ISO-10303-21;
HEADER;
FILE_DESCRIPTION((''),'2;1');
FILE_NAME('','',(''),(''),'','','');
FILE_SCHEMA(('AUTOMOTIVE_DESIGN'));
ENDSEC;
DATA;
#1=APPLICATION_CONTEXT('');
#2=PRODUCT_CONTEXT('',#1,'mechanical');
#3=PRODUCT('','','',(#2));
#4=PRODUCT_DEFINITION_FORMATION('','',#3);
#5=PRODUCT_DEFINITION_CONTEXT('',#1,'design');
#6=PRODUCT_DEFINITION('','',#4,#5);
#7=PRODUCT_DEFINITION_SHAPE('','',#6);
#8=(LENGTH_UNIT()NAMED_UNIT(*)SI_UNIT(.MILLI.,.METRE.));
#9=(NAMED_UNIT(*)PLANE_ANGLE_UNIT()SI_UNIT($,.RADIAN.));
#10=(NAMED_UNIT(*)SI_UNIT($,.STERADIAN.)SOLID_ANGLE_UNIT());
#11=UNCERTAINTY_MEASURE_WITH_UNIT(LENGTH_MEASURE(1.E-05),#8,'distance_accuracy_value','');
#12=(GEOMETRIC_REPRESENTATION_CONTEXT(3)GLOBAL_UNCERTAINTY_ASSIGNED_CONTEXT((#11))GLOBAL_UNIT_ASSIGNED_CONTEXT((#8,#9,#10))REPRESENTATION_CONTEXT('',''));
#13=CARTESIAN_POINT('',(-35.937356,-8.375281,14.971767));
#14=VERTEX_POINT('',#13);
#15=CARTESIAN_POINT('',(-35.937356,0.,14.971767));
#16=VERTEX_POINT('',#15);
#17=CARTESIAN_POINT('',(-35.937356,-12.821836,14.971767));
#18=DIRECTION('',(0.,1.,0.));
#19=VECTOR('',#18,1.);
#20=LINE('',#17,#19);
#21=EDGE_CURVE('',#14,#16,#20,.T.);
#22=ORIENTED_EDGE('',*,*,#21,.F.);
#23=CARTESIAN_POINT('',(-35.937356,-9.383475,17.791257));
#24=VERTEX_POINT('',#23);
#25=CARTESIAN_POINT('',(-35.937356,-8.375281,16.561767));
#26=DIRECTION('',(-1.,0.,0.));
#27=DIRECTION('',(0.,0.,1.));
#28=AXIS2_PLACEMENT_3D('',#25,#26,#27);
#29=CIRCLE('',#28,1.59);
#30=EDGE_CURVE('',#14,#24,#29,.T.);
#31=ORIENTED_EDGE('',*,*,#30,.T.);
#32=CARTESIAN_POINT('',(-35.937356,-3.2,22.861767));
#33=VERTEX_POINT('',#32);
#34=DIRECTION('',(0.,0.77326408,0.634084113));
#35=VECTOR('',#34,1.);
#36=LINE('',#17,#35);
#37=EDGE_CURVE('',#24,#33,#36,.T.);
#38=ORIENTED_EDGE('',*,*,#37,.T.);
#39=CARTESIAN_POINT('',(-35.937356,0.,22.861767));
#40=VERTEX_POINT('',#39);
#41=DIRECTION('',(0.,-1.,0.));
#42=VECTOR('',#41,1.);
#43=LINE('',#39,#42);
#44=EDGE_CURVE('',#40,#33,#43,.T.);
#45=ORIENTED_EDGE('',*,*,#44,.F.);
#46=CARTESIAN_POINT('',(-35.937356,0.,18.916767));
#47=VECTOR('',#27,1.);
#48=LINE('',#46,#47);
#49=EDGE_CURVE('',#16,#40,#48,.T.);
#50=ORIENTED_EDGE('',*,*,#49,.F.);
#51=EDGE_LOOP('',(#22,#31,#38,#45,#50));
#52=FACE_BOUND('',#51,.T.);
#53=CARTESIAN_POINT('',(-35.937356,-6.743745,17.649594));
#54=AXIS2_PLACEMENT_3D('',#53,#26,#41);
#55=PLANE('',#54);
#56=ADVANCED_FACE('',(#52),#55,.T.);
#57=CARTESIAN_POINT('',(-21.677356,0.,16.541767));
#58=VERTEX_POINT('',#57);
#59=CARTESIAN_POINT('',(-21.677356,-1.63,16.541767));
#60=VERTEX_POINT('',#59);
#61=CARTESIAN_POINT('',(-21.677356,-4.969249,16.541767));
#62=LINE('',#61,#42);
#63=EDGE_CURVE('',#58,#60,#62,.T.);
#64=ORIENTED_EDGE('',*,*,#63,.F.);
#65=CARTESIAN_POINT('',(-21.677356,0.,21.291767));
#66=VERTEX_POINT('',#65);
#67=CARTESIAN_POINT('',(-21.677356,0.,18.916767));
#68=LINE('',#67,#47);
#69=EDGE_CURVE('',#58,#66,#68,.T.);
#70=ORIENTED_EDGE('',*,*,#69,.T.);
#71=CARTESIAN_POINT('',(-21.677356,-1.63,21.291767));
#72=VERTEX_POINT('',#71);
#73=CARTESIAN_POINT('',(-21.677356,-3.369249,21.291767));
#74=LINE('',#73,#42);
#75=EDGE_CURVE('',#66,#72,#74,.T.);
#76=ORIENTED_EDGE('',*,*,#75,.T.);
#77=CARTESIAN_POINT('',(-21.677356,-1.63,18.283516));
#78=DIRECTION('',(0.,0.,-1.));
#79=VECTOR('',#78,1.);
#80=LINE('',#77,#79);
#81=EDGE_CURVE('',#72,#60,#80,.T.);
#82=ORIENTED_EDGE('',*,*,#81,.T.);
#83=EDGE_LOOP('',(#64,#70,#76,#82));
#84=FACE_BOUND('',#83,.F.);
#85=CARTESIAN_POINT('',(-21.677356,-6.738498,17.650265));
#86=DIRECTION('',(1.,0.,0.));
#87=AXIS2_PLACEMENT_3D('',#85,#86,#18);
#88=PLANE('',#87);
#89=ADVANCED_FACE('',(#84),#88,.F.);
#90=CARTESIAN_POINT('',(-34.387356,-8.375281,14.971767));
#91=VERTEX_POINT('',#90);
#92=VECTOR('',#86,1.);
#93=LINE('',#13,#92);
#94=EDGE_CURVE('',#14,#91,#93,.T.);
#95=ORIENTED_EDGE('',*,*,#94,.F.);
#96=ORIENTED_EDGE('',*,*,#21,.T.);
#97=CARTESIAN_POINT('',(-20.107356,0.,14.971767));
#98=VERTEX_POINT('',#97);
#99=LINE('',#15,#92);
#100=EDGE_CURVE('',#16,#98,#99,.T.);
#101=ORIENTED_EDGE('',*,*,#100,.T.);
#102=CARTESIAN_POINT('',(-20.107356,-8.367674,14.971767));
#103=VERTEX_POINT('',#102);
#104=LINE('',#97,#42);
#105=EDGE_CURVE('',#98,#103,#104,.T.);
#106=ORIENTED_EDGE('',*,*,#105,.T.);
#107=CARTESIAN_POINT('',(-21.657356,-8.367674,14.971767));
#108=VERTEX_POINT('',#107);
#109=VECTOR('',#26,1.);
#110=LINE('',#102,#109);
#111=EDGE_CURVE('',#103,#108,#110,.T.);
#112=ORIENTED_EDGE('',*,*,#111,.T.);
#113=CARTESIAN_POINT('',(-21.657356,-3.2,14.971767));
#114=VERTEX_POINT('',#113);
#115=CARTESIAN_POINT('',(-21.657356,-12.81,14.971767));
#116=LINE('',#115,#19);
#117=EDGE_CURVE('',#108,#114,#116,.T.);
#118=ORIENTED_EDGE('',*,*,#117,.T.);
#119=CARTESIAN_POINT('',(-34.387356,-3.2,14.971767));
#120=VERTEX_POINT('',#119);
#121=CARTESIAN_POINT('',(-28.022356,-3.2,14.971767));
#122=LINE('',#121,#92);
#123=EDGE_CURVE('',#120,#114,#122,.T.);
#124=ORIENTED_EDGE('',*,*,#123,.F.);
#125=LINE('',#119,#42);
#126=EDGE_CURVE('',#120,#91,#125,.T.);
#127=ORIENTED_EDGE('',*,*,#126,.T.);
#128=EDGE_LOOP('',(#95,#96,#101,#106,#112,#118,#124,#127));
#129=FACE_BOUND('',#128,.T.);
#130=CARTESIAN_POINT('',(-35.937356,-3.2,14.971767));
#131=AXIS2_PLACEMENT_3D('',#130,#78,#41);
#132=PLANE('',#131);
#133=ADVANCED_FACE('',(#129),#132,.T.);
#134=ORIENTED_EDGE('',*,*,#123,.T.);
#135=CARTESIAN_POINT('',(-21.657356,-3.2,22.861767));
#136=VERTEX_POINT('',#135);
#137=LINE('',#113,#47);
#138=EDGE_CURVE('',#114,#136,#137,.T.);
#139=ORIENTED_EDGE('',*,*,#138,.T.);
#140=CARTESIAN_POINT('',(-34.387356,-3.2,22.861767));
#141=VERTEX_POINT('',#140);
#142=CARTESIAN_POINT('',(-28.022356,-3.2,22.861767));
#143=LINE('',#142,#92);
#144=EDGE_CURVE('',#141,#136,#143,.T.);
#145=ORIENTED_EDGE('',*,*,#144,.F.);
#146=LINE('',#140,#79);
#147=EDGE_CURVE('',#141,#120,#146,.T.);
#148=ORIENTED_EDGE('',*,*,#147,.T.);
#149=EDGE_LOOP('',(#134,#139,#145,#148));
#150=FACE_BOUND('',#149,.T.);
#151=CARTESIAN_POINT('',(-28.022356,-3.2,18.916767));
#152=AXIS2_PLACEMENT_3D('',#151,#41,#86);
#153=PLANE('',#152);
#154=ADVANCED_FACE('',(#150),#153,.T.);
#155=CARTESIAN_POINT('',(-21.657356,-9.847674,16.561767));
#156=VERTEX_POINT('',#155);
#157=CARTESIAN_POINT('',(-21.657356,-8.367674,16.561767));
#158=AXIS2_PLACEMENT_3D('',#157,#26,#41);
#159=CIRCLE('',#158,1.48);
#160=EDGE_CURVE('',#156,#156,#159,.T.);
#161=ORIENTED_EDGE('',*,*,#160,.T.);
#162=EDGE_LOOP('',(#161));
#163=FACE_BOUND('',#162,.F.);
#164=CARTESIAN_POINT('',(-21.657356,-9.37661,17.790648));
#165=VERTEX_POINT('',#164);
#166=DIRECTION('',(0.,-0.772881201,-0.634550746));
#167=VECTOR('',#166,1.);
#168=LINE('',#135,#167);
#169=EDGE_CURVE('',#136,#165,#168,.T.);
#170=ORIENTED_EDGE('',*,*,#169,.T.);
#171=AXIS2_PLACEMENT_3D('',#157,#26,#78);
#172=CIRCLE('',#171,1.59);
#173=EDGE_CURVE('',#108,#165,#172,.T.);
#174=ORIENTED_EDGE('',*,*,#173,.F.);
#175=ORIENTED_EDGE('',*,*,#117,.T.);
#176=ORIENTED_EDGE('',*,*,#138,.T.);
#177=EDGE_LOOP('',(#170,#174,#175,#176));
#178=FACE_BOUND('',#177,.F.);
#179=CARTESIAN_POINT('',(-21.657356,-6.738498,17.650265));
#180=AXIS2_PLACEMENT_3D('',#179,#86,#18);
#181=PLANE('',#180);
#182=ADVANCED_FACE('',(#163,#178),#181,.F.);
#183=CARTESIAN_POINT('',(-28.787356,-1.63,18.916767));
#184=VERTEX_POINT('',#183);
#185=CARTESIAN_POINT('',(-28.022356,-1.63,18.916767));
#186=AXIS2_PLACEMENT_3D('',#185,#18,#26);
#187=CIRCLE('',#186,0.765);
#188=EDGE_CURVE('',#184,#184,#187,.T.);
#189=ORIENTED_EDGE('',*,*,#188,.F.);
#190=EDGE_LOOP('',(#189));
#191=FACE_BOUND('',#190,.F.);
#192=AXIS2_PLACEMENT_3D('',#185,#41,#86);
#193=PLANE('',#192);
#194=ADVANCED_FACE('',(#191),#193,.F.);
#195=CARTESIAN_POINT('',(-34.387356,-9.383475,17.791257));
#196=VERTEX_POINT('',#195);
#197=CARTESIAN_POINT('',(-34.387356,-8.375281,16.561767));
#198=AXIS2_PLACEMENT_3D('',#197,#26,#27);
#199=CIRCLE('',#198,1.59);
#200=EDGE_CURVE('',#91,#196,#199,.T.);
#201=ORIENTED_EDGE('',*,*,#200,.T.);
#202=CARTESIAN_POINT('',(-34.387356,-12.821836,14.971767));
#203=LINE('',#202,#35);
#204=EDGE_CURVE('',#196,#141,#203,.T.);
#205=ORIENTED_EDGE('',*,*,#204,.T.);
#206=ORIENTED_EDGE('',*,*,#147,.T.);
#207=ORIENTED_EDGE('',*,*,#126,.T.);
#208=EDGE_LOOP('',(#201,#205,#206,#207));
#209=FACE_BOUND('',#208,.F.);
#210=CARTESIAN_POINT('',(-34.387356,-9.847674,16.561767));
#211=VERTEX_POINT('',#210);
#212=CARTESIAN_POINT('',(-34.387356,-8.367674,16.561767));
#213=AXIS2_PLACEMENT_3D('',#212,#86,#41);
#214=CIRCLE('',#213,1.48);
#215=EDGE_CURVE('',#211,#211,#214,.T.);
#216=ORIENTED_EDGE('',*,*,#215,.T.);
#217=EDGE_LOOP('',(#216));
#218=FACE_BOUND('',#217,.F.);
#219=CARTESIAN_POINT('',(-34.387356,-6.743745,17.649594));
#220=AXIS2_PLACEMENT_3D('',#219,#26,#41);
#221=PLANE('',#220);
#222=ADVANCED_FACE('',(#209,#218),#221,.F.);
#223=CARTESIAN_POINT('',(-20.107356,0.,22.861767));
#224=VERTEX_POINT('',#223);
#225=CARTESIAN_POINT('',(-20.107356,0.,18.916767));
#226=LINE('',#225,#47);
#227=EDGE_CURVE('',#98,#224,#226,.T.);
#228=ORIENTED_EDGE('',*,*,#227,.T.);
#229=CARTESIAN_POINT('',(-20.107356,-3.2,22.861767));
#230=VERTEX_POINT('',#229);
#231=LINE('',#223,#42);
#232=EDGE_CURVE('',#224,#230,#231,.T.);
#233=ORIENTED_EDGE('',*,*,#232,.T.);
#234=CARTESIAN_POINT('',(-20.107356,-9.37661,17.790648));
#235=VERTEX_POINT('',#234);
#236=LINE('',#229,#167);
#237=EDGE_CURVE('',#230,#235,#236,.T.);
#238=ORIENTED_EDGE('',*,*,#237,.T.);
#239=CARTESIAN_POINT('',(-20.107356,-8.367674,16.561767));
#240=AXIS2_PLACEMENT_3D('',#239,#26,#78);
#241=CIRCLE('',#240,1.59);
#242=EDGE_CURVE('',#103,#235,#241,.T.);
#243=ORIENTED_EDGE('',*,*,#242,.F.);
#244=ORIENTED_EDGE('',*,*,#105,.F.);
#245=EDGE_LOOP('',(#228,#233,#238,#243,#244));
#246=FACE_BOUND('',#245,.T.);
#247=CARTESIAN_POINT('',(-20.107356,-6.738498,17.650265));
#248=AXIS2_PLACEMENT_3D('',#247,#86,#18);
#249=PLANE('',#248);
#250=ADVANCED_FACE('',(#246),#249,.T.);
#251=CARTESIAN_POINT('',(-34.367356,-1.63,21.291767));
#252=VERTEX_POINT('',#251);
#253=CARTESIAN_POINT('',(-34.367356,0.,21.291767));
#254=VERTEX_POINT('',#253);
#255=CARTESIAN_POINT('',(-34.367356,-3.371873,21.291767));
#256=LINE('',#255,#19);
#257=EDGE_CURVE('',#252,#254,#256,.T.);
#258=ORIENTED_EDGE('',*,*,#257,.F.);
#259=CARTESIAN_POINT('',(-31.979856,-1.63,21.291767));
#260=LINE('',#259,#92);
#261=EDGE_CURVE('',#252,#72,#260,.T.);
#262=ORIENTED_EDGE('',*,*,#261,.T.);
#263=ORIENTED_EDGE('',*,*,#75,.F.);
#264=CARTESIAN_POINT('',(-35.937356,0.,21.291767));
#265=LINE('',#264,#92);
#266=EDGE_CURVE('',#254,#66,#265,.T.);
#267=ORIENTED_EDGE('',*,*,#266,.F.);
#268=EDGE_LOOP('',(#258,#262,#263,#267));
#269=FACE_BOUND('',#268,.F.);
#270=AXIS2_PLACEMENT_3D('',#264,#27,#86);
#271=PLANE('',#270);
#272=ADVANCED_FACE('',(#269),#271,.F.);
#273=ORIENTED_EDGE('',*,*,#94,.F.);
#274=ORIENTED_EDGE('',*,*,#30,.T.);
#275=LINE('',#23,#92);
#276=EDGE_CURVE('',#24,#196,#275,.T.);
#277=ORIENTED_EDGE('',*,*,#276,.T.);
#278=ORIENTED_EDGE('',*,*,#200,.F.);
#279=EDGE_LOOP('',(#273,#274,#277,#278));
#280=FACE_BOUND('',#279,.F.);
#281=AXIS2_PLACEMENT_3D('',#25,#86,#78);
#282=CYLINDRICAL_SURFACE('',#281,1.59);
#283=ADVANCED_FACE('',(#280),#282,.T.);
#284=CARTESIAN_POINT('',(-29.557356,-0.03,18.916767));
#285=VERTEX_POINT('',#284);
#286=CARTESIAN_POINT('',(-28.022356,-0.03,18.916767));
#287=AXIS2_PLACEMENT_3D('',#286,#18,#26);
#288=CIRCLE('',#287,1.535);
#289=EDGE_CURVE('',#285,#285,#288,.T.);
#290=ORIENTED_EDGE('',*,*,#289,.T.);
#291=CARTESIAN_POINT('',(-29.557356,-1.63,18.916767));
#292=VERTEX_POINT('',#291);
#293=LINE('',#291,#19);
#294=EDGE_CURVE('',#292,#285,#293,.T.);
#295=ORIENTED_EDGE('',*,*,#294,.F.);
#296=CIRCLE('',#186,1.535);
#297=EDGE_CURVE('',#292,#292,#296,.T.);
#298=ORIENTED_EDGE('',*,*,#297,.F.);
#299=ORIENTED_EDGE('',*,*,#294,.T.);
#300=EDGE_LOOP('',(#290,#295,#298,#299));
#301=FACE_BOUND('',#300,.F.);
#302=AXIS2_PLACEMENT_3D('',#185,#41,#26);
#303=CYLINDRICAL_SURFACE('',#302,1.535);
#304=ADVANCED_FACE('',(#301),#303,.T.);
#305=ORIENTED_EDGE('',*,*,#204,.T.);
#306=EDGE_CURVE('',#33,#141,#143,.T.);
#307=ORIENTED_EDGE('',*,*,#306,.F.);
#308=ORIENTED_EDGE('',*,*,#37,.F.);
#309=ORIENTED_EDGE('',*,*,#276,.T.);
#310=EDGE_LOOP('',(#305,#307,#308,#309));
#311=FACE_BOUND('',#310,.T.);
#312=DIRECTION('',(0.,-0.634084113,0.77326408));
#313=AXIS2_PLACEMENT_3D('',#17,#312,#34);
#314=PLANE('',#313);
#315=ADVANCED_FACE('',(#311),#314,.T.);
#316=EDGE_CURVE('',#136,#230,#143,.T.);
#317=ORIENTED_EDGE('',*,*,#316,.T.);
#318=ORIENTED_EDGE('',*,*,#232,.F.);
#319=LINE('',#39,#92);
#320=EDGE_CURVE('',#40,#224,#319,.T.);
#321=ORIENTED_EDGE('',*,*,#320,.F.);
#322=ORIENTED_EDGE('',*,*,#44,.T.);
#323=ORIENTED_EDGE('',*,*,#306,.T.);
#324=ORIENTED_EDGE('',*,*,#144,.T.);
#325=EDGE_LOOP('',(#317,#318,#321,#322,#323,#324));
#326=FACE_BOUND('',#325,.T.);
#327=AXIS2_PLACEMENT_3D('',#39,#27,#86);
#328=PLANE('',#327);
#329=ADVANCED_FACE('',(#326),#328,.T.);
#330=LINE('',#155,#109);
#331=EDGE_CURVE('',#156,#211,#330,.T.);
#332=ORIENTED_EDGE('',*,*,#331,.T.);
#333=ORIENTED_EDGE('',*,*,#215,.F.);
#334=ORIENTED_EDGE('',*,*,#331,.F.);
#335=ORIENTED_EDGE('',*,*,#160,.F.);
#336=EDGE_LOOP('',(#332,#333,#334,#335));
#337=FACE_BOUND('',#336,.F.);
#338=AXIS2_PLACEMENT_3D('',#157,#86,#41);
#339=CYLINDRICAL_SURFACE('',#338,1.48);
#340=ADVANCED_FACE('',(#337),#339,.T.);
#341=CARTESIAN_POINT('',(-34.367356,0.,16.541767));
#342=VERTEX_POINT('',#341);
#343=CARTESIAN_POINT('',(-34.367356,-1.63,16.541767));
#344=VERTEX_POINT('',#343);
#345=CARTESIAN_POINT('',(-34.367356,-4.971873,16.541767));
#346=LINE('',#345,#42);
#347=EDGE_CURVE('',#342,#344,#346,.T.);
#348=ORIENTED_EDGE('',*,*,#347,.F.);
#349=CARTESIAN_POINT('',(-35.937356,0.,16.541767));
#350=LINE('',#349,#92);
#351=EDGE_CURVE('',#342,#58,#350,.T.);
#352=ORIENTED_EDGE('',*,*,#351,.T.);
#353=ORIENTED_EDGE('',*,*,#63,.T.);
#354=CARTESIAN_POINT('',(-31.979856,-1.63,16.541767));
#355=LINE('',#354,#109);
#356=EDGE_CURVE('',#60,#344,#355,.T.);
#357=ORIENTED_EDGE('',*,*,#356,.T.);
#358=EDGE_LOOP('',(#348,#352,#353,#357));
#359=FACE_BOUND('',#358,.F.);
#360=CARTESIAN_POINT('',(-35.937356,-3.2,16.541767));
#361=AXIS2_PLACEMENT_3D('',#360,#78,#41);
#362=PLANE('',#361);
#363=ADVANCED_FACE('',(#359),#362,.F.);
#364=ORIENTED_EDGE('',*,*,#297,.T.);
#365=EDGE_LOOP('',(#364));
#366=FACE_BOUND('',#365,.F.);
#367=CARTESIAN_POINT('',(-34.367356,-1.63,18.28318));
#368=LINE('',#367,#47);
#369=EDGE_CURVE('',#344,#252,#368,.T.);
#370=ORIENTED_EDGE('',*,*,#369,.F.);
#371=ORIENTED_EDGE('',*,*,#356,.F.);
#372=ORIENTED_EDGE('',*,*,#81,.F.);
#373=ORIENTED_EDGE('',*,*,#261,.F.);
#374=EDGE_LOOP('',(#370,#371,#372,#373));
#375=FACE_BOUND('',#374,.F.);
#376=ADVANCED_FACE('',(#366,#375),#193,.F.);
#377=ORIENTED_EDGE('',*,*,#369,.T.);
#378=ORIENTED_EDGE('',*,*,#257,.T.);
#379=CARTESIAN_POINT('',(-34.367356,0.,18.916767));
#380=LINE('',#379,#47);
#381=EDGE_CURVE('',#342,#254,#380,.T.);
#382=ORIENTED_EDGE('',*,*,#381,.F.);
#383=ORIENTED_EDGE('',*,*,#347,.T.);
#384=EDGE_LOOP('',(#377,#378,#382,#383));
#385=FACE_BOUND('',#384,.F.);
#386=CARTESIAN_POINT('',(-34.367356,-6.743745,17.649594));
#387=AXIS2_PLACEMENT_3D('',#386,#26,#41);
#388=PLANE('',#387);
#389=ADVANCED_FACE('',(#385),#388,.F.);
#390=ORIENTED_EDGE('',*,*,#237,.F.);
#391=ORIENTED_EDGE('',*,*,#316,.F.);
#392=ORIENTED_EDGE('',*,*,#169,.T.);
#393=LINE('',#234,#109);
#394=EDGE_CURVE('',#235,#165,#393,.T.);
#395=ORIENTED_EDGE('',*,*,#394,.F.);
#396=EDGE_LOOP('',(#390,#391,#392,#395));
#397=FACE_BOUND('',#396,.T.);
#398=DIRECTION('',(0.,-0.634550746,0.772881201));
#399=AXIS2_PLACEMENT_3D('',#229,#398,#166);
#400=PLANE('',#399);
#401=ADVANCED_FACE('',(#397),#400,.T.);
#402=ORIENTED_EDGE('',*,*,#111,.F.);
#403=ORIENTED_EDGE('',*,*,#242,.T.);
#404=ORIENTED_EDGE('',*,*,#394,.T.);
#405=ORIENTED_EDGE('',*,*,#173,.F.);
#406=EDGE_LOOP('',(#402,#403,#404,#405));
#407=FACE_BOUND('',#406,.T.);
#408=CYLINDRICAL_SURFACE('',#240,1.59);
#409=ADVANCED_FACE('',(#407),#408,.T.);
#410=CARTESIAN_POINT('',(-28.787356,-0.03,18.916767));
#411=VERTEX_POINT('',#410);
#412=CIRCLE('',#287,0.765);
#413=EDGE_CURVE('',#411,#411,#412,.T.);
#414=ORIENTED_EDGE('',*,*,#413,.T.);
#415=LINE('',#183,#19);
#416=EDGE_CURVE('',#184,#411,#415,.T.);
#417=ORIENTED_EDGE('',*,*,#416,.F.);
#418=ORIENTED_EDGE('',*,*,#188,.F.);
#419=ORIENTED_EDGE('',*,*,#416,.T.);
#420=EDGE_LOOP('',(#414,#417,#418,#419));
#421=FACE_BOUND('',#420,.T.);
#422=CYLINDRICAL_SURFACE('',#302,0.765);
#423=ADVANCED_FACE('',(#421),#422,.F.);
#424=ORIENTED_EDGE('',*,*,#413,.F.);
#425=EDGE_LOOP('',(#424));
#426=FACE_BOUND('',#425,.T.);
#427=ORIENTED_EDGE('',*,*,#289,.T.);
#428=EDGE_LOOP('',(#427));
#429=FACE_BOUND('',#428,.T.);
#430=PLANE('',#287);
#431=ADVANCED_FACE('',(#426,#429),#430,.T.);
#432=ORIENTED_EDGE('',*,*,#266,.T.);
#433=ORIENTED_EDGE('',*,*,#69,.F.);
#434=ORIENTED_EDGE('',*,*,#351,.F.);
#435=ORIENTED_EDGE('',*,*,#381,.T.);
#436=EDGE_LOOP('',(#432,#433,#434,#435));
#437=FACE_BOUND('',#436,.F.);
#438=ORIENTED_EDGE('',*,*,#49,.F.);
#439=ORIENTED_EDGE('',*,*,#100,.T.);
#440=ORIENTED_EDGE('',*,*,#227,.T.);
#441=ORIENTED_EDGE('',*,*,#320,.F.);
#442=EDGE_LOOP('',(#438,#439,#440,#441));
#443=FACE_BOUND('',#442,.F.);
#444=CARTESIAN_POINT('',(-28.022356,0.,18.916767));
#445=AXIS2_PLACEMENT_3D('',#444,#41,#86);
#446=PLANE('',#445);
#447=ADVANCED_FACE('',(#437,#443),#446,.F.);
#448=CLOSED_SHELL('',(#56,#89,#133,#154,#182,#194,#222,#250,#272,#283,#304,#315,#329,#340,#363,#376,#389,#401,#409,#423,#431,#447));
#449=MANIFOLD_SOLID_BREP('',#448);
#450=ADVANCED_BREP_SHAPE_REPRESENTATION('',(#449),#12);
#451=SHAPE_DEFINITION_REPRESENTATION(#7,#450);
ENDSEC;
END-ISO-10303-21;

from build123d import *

# Parameters (mm, degrees)
F0_W      = 15.83
F0_H      = 7.89
F1_DEPTH  = 3.2
F3_DEPTH  = 1.55
F4_R      = 1.59
F6_DEPTH  = 1.55
F7_R      = 1.59
F8_DEPTH  = 1.55
F9_R      = 1.48
F10_DEPTH = 12.83
F11_T     = -1.57
F12_R     = 1.535
F12_R_2   = 0.765
F13_DEPTH = 1.6


with BuildPart() as f1:
    # F0 (on Front) → F1 (new body)
    with BuildSketch(Plane.XZ):
        with Locations((-28.0223558657, 18.9167669917)):
            Rectangle(F0_W, F0_H)
    extrude(amount=F1_DEPTH)

    # F2 (on face) → F3 (join)
    with BuildSketch(Plane.YZ.offset(-20.1073558657)):
        Polygon((-12.81, 14.9717669917), (-3.2, 14.9717669917), (-3.2, 22.8617669917), align=None)
    extrude(amount=-F3_DEPTH)

    # F4
    f4_edges = [f1.edges().sort_by_distance(p)[0] for p in [
        (-20.882356, -12.81, 14.971767),
    ]]
    fillet(f4_edges, radius=F4_R)

    # F5 (on face) → F6 (join)
    with BuildSketch(Plane(origin=(-35.9373558657, 0, 0), x_dir=(0, -1, 0), z_dir=(-1, 0, 0))):
        Polygon((3.2, 22.8617669917), (3.2, 14.9717669917), (12.8218363971, 14.9717669917), align=None)
    extrude(amount=-F6_DEPTH)

    # F7
    f7_edges = [f1.edges().sort_by_distance(p)[0] for p in [
        (-35.162356, -12.821836, 14.971767),
    ]]
    fillet(f7_edges, radius=F7_R)


with BuildPart() as f8:
    # F8 (new): a face of the model
    f8_faces = [f1.part.faces().sort_by_distance(p)[0] for p in [
        (-35.9373558657, -4.069759588, 18.2879557139),
    ]]
    extrude(f8_faces, amount=-F8_DEPTH)


with BuildPart() as f1_1:
    add(f1.part)

    add(f8.part)  # F10 merges F8
    # F9 (on face) → F10 (join)
    with BuildSketch(Plane(origin=(-21.6573558657, 0, 0), x_dir=(0, -1, 0), z_dir=(-1, 0, 0))):
        with Locations((8.367674268, 16.5617669917)):
            Circle(F9_R)
    extrude(amount=F10_DEPTH)

    # F11
    f11_openings = [f1_1.faces().sort_by_distance(p)[0] for p in [
        (-28.022356, 0, 18.916767),
    ]]
    offset(amount=F11_T, openings=f11_openings)

    # F12 (on face) → F13 (join)
    with BuildSketch(Plane(origin=(0, -1.63, 0), x_dir=(-1, 0, 0), z_dir=(0, 1, 0))):
        with Locations((28.0223558657, 18.9167669917)):
            Circle(F12_R)
        with Locations((28.0223558657, 18.9167669917)):
            Circle(F12_R_2, mode=Mode.SUBTRACT)
    extrude(amount=F13_DEPTH)


solid = f1_1.part
